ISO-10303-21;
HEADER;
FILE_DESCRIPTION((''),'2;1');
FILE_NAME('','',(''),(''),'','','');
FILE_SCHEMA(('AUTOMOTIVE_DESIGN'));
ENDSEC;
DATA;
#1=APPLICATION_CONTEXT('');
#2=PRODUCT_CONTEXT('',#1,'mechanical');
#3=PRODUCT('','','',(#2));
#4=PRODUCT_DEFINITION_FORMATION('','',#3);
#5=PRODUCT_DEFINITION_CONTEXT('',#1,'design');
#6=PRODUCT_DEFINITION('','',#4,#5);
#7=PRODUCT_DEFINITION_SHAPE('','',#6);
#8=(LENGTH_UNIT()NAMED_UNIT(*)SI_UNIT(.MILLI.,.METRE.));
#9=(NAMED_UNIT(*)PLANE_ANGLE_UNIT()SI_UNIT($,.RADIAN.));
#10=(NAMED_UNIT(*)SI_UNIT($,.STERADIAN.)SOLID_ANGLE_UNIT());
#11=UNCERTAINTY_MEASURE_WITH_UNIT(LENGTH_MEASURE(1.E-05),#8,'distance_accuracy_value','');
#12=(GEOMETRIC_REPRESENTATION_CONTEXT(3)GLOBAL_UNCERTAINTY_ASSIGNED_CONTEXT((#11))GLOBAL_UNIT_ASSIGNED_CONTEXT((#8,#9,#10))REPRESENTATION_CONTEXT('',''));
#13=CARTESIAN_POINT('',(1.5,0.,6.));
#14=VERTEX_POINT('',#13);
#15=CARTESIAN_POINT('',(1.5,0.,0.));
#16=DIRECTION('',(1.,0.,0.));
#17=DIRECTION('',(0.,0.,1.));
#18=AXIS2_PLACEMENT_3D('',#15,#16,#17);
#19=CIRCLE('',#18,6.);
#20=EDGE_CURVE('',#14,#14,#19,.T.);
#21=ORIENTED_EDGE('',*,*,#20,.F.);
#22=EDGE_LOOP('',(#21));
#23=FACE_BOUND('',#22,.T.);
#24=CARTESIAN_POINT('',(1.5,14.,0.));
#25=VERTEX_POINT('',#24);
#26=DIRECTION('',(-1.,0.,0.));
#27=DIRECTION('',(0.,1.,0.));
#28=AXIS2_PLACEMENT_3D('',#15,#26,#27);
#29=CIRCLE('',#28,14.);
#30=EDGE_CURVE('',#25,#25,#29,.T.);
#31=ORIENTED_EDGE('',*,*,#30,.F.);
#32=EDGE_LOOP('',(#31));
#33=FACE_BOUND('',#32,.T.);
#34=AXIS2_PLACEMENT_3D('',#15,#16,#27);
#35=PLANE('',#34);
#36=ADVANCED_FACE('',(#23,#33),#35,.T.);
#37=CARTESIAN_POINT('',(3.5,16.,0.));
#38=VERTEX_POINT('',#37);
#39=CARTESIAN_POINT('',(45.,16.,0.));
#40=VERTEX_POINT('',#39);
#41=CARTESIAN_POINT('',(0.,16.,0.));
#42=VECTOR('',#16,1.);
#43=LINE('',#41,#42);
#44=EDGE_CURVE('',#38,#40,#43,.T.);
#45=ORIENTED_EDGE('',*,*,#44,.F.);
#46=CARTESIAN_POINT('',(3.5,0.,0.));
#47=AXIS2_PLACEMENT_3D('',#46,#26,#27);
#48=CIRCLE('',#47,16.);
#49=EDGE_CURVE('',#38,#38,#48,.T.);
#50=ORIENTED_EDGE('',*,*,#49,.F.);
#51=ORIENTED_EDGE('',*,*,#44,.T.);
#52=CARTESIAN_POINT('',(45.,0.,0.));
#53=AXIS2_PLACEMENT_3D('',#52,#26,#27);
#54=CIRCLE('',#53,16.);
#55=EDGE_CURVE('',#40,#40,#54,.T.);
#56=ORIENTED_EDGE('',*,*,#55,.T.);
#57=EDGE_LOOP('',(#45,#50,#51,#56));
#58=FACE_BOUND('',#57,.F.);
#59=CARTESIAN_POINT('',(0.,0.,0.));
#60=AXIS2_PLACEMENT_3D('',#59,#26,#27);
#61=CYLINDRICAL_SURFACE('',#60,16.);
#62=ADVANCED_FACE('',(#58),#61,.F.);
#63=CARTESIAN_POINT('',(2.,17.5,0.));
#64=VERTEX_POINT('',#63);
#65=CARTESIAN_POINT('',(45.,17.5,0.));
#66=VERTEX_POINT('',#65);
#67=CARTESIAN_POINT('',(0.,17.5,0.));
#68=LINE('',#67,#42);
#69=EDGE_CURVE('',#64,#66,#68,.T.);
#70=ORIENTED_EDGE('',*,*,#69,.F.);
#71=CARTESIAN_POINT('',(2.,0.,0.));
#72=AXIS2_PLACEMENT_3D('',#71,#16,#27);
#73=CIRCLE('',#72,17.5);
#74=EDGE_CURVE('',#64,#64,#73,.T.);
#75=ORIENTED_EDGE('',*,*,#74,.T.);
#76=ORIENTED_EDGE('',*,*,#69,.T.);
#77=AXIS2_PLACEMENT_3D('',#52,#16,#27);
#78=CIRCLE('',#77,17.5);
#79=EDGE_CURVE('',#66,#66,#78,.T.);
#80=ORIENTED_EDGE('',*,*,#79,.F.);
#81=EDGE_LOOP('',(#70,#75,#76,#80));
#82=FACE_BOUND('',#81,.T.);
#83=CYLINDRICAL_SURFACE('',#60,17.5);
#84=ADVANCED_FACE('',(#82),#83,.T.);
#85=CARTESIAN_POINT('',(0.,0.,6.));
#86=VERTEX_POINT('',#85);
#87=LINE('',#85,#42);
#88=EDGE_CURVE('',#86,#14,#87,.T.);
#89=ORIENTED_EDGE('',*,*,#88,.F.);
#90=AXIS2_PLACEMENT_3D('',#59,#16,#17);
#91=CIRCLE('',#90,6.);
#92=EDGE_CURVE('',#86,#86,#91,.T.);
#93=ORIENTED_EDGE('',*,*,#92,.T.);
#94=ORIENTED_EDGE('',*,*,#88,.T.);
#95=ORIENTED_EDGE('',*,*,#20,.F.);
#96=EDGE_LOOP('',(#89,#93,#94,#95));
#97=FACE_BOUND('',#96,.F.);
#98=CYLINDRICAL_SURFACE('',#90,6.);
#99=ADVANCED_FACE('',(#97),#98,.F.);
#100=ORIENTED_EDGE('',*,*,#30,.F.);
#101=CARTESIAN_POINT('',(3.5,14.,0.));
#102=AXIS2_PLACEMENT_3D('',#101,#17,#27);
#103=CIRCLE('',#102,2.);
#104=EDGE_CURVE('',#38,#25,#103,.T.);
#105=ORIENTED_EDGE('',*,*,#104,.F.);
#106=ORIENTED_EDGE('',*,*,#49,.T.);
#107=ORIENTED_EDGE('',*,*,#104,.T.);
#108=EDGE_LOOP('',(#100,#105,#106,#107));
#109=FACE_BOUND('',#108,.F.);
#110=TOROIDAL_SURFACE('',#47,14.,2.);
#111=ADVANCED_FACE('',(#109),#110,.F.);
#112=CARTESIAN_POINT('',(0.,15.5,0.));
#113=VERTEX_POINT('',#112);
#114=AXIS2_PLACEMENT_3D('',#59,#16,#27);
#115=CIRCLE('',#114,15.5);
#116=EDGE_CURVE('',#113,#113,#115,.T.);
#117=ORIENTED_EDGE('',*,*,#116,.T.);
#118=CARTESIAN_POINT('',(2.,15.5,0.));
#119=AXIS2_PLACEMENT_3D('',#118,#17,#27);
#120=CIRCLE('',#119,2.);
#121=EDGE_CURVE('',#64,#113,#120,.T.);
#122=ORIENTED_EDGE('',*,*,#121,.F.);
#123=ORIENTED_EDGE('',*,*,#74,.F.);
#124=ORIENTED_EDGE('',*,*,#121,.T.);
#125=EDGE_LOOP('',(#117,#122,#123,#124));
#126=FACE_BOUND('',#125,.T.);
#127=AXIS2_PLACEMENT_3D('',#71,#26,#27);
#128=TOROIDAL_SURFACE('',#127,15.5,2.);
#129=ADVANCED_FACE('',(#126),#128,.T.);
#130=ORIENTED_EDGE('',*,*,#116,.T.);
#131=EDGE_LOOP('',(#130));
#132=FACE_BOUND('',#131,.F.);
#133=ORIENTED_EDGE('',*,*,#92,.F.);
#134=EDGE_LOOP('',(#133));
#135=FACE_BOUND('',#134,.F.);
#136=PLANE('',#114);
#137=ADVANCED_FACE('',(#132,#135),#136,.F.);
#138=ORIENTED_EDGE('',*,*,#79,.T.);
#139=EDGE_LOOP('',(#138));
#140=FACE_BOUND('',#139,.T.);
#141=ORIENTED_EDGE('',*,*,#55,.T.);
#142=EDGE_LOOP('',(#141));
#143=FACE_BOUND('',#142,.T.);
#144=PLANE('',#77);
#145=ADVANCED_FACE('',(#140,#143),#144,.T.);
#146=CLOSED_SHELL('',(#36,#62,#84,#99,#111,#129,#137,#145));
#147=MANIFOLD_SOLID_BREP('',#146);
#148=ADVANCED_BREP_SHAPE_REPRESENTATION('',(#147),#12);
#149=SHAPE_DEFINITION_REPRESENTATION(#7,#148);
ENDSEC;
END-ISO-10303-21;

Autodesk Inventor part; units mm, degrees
ref_plane "YZ Plane" through (0, 0, 0) normal (1, 0, 0) x (0, 1, 0)
ref_plane "XZ Plane" through (0, 0, 0) normal (0, 1, 0) x (-1, 0, 0)
ref_plane "XY Plane" through (0, 0, 0) normal (0, 0, 1) x (1, 0, 0)
sketch "Sketch1" plane through (0, 0, 0) normal (1, 0, 0) x (0, 1, 0)
  circle A0 centre (0, 0) radius 17.5
  dimension "d0" = 35
extrude "Extrusion1" add sketch "Sketch1" along normal blind 45
shell "Shell1" thickness 1.5 removed faces 1 at (45, 4.865, -5.1831)
sketch "Sketch2" plane through (0, 0, 0) normal (-1, 0, 0) x (0, 0, 1)
  point P0 (0, 0)
hole "Hole1" at (0, 0, 0) direction (1, 0, 0) diameter 12 end through all
fillet "Fillet1" radius 2 2 edges at (0, -17.5, 0) (1.5, -16, 0)
properties material "Steel, Mild"
